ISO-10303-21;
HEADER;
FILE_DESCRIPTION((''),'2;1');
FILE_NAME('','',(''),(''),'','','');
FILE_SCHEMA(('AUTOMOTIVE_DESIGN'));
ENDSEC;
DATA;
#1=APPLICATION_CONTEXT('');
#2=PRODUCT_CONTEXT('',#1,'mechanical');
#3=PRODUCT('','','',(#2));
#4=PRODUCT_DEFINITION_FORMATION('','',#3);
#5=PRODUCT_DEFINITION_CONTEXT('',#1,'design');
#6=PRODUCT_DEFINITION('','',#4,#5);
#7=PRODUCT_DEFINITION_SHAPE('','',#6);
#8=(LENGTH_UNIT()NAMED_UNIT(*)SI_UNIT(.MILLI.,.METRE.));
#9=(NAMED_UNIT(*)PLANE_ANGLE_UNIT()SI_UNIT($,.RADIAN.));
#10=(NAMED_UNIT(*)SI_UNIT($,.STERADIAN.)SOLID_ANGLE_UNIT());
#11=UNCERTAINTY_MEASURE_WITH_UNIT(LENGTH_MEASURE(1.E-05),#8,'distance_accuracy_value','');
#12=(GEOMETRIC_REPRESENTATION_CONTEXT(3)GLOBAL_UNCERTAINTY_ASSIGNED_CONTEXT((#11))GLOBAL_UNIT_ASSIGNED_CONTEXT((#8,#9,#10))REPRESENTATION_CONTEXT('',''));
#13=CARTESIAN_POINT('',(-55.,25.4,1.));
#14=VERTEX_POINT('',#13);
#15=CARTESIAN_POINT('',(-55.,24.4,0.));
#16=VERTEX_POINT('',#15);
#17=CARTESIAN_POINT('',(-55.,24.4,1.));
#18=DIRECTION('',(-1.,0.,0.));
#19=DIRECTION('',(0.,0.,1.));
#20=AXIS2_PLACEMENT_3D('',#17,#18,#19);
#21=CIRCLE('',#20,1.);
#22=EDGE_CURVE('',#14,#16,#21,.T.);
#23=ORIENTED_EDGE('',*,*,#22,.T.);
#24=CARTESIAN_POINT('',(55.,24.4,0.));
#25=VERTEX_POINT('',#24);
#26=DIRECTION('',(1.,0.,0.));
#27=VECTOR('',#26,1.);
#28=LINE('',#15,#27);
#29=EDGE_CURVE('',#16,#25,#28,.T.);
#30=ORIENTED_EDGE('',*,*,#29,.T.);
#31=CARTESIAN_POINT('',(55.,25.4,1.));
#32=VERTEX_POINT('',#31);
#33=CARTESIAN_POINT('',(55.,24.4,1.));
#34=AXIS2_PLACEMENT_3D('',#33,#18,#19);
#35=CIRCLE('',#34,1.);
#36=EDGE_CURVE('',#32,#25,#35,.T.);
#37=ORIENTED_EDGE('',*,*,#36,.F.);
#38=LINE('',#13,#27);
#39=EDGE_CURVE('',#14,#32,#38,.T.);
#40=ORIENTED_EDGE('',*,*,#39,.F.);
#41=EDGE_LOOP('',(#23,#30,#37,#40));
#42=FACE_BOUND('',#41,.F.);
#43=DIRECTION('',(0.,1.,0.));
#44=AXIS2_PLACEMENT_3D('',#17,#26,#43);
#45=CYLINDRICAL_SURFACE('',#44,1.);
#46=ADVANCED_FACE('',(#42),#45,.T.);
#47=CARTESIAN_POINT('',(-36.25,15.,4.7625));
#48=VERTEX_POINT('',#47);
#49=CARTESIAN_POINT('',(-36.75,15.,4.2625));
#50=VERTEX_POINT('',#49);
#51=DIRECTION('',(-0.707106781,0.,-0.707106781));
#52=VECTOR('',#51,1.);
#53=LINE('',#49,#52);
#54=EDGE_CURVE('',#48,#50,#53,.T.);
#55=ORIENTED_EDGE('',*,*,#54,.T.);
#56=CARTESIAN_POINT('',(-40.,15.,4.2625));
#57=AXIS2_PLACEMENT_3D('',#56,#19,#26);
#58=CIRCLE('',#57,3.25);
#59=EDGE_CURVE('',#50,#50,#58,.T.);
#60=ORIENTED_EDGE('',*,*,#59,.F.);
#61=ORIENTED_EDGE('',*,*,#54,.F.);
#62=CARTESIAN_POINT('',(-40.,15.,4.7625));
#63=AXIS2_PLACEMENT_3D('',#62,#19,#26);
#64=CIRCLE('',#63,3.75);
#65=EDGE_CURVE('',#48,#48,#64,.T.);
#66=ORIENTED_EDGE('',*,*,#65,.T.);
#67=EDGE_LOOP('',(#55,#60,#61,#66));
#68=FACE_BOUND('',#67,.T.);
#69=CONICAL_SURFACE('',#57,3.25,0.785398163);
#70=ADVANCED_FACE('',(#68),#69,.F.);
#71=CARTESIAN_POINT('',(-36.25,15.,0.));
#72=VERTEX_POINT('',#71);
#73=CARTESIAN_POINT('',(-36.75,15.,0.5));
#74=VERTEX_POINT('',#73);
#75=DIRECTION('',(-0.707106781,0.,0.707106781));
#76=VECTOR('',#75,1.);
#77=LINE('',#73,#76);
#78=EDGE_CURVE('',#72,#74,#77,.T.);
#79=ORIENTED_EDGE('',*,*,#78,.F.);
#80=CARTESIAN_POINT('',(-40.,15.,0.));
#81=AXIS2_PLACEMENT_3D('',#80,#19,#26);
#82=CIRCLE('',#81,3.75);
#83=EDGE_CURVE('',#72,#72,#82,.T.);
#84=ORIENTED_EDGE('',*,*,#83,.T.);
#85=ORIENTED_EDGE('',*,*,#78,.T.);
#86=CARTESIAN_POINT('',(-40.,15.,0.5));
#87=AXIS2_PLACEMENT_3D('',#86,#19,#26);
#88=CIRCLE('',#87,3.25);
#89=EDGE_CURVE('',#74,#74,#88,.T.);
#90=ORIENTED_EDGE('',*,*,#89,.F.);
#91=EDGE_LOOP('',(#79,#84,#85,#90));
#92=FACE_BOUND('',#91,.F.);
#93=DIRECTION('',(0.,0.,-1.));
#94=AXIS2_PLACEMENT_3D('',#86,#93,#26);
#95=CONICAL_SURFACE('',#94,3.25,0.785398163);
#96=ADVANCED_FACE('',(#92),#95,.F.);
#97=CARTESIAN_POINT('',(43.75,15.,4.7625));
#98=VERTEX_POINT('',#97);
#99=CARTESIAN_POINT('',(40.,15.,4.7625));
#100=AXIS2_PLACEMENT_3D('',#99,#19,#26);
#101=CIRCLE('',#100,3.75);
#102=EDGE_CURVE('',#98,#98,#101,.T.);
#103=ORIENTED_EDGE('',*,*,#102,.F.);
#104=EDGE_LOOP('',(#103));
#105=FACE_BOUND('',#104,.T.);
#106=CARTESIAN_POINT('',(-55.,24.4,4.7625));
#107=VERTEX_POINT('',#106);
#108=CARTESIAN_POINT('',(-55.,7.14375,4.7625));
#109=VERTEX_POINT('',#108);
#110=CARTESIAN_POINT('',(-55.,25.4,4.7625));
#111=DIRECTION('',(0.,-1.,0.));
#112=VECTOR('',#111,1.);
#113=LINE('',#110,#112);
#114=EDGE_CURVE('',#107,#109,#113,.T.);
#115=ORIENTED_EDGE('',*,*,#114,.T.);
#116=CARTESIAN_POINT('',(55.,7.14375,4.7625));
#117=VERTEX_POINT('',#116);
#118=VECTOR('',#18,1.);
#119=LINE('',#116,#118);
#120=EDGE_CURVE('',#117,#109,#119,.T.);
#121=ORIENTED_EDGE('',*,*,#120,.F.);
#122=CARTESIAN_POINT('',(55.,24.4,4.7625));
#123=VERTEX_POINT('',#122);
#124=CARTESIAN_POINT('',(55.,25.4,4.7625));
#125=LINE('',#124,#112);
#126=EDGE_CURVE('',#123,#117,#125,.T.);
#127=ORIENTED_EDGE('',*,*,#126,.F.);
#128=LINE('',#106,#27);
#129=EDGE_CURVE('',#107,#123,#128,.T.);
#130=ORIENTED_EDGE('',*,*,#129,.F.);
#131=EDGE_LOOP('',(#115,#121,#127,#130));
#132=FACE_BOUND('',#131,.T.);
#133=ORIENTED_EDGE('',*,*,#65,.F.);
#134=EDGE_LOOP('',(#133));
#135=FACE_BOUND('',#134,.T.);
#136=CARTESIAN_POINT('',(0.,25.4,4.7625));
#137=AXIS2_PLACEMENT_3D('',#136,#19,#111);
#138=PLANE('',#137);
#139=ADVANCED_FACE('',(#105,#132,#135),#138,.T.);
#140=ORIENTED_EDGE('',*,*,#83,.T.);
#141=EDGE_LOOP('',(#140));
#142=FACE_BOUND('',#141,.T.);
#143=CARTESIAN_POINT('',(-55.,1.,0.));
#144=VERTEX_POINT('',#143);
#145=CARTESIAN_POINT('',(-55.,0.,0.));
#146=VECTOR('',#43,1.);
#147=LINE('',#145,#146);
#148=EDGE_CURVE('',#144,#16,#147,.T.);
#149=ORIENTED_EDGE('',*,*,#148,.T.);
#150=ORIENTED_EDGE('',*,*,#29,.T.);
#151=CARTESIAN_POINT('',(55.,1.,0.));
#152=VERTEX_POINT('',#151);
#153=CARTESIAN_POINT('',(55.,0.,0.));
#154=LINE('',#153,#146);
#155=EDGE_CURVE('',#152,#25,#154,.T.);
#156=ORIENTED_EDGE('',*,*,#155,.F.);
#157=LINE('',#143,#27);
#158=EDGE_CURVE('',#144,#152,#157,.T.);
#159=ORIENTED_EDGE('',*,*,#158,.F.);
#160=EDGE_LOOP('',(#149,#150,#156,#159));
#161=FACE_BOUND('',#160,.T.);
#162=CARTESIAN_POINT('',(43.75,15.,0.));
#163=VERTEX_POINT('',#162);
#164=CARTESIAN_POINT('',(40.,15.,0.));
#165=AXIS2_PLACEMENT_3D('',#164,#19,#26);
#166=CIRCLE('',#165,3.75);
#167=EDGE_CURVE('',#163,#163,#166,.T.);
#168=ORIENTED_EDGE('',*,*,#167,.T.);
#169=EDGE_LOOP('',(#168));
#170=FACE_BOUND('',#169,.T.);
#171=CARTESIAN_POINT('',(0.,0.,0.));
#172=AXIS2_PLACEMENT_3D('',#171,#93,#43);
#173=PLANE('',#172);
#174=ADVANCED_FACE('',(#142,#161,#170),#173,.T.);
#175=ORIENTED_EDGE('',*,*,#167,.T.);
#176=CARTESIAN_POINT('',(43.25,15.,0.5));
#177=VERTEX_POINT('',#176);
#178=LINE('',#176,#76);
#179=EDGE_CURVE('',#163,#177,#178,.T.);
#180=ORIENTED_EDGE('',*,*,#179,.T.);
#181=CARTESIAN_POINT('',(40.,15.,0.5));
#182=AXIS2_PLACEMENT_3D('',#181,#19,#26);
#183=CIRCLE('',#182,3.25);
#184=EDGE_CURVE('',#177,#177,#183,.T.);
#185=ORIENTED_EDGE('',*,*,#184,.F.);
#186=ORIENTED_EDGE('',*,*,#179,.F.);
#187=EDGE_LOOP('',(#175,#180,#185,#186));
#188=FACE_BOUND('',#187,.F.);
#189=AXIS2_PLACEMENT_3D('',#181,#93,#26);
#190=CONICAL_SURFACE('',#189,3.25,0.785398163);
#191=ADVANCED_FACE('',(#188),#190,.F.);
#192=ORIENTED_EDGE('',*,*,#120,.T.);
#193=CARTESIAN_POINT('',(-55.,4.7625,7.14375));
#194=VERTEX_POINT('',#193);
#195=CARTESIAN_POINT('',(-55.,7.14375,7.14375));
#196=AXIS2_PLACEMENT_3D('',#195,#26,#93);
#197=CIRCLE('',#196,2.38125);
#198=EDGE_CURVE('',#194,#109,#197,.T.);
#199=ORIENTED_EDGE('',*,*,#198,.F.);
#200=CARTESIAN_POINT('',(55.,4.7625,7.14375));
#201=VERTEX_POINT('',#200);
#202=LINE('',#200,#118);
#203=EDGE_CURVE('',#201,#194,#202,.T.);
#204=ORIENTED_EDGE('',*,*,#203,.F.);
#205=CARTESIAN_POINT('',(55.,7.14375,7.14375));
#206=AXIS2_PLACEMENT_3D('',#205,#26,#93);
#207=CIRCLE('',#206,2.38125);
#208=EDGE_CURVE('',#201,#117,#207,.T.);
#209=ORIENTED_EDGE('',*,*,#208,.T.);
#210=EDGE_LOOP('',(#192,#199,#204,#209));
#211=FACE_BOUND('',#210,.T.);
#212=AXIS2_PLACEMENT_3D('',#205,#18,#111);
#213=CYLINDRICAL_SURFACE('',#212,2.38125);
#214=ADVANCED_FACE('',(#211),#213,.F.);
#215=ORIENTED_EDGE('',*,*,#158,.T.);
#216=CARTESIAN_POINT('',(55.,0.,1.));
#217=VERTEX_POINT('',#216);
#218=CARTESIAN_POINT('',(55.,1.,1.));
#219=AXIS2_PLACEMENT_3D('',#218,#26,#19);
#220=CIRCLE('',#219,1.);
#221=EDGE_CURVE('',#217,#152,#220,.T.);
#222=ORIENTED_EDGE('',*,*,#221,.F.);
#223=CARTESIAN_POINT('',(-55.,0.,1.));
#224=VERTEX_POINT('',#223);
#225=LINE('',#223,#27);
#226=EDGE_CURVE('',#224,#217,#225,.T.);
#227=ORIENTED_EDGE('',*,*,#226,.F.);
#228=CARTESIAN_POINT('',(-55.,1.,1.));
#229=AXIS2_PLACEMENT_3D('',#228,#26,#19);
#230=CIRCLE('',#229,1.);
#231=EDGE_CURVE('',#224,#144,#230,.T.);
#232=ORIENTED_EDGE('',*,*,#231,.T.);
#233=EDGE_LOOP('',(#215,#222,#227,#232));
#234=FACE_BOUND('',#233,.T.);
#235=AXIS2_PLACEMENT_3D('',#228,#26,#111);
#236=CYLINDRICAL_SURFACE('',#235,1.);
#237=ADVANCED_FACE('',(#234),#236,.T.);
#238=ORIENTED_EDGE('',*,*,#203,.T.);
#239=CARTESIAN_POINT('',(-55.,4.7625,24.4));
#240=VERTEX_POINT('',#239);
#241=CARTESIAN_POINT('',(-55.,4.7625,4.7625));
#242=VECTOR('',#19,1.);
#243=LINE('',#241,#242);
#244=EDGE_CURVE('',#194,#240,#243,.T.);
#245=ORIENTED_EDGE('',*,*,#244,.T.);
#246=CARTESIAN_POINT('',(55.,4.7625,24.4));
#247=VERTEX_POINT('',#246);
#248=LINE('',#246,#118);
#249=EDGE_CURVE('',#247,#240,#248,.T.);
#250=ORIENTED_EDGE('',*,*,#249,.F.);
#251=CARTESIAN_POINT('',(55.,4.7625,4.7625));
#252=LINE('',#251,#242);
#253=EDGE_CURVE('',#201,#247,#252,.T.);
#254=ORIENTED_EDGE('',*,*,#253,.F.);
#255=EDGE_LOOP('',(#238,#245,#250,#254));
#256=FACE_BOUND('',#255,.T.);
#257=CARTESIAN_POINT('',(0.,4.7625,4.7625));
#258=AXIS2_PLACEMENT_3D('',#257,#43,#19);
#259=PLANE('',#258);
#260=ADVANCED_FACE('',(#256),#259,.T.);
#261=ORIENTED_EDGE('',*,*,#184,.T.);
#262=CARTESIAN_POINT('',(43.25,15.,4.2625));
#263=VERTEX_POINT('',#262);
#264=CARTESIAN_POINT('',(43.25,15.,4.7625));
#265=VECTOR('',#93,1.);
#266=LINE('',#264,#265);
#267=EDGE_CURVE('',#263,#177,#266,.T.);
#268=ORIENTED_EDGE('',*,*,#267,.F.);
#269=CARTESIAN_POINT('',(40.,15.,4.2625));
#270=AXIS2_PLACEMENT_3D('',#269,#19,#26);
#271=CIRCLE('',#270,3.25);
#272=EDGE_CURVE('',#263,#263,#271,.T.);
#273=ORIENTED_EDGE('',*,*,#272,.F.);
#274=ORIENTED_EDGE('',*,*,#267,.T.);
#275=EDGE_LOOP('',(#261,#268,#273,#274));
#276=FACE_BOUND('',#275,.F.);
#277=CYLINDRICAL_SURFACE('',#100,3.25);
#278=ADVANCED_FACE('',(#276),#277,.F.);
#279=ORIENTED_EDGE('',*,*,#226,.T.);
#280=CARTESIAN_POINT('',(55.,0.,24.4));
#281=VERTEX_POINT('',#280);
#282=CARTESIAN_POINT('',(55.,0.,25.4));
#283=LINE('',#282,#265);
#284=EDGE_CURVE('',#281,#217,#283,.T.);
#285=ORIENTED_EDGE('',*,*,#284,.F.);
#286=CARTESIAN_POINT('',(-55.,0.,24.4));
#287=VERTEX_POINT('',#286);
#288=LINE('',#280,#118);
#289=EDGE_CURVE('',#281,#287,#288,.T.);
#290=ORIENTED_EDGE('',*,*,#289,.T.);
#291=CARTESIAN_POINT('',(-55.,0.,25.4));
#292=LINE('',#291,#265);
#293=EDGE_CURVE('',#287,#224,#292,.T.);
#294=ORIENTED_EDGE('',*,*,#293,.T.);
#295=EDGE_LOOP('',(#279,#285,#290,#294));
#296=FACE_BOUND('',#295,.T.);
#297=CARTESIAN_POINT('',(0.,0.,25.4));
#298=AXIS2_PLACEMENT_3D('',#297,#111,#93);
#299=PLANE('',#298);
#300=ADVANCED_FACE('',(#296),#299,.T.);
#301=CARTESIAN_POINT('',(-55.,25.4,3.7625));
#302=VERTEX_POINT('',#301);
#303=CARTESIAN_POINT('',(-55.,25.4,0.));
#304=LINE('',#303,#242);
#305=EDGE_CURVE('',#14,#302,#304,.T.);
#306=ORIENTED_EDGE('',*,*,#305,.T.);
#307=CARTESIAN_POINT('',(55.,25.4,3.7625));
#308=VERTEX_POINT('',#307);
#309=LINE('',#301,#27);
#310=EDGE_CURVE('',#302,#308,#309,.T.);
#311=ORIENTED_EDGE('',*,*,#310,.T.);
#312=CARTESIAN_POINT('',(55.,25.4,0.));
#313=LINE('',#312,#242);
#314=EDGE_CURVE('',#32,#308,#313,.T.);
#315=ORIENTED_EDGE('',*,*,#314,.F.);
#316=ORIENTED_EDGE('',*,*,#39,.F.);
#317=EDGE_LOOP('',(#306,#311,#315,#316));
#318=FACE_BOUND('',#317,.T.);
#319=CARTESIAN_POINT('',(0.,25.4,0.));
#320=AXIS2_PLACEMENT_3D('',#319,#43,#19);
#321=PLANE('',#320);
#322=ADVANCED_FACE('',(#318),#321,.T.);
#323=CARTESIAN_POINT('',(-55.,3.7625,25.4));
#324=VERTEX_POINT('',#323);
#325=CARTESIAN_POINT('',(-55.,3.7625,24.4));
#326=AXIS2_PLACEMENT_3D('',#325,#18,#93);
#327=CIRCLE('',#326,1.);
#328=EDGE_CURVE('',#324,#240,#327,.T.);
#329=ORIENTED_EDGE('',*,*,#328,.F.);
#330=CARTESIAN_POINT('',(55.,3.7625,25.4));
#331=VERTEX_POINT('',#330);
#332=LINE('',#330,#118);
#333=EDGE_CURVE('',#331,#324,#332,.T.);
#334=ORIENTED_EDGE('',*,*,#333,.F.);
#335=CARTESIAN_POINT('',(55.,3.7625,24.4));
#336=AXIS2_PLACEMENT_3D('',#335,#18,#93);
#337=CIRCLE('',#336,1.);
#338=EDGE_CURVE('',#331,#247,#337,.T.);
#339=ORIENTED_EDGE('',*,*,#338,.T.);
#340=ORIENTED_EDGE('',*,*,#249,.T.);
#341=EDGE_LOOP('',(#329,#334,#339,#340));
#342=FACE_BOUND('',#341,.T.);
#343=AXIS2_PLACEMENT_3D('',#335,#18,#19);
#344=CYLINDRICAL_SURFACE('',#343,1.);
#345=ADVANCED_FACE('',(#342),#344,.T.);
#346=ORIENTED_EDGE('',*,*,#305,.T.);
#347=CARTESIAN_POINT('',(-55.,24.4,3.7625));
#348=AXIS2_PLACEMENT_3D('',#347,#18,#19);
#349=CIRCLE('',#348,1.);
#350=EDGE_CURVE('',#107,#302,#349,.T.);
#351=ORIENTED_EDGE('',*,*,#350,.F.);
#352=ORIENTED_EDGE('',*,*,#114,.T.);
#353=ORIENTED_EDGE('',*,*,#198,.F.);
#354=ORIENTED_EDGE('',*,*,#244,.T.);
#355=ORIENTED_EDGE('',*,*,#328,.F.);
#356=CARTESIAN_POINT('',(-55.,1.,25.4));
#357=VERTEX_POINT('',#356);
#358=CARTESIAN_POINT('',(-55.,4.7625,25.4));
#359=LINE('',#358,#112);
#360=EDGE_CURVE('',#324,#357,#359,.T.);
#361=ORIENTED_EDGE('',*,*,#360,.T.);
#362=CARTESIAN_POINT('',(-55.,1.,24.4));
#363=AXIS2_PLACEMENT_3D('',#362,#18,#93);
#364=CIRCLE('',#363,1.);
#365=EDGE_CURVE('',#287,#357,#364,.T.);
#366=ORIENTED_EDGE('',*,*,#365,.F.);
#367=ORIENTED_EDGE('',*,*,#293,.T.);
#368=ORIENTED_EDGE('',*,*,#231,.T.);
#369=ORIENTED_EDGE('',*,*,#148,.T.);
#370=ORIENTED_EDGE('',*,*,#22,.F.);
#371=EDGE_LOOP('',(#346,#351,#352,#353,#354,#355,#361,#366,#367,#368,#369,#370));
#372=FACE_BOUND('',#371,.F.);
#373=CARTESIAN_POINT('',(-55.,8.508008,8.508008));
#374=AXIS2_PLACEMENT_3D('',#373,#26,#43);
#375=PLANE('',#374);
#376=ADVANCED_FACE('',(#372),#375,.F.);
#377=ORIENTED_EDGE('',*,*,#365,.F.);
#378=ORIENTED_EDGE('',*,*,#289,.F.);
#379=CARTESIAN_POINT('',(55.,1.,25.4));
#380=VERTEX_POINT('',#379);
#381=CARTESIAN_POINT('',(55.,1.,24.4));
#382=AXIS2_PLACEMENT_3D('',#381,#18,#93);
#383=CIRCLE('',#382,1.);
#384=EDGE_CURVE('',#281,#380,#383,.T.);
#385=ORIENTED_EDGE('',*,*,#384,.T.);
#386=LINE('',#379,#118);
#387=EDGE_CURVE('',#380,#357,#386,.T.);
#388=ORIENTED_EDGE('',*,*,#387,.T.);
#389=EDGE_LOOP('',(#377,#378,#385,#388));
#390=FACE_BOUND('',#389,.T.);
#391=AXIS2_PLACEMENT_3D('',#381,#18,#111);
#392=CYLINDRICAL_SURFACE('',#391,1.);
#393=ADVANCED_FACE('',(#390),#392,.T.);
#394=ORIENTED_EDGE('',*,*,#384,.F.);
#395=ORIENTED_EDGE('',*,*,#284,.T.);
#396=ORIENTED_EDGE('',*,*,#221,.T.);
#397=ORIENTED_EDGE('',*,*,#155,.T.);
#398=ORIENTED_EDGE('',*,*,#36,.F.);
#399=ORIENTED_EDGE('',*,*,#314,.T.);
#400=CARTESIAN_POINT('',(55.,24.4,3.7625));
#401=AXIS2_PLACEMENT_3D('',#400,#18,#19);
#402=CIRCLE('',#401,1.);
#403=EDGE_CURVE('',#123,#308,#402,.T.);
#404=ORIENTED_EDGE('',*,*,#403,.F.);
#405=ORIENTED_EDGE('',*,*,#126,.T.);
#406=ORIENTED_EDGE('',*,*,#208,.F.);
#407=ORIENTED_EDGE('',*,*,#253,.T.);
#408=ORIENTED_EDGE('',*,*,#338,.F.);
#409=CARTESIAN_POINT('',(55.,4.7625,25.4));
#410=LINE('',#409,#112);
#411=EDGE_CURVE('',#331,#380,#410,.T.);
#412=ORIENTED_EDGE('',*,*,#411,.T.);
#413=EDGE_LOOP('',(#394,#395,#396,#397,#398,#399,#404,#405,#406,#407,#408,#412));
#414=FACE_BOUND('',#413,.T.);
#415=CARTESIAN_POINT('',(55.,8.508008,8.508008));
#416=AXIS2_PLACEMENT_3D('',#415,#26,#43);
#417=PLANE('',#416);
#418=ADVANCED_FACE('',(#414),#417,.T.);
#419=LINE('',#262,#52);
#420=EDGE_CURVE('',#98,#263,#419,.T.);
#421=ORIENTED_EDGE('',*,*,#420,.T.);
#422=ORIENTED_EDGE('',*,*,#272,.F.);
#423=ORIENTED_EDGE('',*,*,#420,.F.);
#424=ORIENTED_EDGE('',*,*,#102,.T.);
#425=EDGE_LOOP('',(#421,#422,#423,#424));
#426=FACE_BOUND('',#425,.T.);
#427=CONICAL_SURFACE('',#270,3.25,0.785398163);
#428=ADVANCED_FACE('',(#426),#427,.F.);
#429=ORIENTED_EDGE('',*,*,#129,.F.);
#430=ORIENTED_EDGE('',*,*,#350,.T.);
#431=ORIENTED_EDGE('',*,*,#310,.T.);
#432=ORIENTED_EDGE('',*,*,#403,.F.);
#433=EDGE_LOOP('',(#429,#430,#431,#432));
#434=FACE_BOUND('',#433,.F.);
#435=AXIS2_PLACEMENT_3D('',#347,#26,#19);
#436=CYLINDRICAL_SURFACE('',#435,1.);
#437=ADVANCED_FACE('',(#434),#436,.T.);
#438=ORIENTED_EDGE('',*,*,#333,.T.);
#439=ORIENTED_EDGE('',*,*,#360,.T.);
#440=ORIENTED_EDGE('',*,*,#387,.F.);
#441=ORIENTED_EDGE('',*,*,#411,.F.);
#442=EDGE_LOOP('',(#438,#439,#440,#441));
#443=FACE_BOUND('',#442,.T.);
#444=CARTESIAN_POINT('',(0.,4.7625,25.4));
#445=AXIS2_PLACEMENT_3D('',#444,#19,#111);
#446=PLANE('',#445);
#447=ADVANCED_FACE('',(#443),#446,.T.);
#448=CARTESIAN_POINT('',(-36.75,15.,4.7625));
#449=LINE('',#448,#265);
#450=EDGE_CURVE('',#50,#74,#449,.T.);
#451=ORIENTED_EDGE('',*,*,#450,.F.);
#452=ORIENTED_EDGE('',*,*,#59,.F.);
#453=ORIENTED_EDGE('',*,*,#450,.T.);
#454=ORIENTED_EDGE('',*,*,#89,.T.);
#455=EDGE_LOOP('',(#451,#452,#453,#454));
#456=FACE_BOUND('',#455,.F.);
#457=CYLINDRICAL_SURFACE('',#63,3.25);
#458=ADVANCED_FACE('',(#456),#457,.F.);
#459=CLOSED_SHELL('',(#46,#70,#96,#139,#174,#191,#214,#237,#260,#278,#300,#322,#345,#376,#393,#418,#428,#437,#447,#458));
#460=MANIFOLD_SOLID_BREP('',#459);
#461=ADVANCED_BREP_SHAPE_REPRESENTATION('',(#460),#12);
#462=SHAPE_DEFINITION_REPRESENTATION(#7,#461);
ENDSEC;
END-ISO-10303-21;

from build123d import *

# Parameters (mm, degrees)
F1_DEPTH = 55
F2_R     = 1
F3_R     = 2.38125
F4_R     = 3.25
F5_DEPTH = 25
F6_SIZE  = 0.5


with BuildPart() as f1:
    # F0 (on Right) → F1 (new body, symmetric)
    with BuildSketch(Plane.YZ):
        Polygon((0, 25.4), (0, 0), (25.4, 0), (25.4, 4.7625), (4.7625, 4.7625), (4.7625, 25.4), align=None)
    extrude(amount=F1_DEPTH, both=True)

    # F2
    f2_edges = [f1.edges().sort_by_distance(p)[0] for p in [
        (0, 0, 25.4),
        (0, 4.7625, 25.4),
        (0, 0, 0),
        (0, 25.4, 4.7625),
        (0, 25.4, 0),
    ]]
    fillet(f2_edges, radius=F2_R)

    # F3
    f3_edges = [f1.edges().sort_by_distance(p)[0] for p in [
        (0, 4.7625, 4.7625),
    ]]
    fillet(f3_edges, radius=F3_R)

    # F4 (on face) → F5 (cut)
    with BuildSketch(Plane.XY.offset(4.7625)):
        with Locations((-40, 15)):
            Circle(F4_R)
        with Locations((690, 15)):
            Circle(F4_R)
        with Locations((1420, 15)):
            Circle(F4_R)
        with Locations((40, 15)):
            Circle(F4_R)
    extrude(amount=-F5_DEPTH, mode=Mode.SUBTRACT)

    # F6
    f6_edges = [f1.edges().sort_by_distance(p)[0] for p in [
        (-43.25, 15, 4.7625),
        (-36.75, 15, 2.38125),
        (-43.25, 15, 0),
        (36.75, 15, 4.7625),
        (43.25, 15, 2.38125),
        (36.75, 15, 0),
    ]]
    chamfer(f6_edges, length=F6_SIZE)


solid = f1.part
